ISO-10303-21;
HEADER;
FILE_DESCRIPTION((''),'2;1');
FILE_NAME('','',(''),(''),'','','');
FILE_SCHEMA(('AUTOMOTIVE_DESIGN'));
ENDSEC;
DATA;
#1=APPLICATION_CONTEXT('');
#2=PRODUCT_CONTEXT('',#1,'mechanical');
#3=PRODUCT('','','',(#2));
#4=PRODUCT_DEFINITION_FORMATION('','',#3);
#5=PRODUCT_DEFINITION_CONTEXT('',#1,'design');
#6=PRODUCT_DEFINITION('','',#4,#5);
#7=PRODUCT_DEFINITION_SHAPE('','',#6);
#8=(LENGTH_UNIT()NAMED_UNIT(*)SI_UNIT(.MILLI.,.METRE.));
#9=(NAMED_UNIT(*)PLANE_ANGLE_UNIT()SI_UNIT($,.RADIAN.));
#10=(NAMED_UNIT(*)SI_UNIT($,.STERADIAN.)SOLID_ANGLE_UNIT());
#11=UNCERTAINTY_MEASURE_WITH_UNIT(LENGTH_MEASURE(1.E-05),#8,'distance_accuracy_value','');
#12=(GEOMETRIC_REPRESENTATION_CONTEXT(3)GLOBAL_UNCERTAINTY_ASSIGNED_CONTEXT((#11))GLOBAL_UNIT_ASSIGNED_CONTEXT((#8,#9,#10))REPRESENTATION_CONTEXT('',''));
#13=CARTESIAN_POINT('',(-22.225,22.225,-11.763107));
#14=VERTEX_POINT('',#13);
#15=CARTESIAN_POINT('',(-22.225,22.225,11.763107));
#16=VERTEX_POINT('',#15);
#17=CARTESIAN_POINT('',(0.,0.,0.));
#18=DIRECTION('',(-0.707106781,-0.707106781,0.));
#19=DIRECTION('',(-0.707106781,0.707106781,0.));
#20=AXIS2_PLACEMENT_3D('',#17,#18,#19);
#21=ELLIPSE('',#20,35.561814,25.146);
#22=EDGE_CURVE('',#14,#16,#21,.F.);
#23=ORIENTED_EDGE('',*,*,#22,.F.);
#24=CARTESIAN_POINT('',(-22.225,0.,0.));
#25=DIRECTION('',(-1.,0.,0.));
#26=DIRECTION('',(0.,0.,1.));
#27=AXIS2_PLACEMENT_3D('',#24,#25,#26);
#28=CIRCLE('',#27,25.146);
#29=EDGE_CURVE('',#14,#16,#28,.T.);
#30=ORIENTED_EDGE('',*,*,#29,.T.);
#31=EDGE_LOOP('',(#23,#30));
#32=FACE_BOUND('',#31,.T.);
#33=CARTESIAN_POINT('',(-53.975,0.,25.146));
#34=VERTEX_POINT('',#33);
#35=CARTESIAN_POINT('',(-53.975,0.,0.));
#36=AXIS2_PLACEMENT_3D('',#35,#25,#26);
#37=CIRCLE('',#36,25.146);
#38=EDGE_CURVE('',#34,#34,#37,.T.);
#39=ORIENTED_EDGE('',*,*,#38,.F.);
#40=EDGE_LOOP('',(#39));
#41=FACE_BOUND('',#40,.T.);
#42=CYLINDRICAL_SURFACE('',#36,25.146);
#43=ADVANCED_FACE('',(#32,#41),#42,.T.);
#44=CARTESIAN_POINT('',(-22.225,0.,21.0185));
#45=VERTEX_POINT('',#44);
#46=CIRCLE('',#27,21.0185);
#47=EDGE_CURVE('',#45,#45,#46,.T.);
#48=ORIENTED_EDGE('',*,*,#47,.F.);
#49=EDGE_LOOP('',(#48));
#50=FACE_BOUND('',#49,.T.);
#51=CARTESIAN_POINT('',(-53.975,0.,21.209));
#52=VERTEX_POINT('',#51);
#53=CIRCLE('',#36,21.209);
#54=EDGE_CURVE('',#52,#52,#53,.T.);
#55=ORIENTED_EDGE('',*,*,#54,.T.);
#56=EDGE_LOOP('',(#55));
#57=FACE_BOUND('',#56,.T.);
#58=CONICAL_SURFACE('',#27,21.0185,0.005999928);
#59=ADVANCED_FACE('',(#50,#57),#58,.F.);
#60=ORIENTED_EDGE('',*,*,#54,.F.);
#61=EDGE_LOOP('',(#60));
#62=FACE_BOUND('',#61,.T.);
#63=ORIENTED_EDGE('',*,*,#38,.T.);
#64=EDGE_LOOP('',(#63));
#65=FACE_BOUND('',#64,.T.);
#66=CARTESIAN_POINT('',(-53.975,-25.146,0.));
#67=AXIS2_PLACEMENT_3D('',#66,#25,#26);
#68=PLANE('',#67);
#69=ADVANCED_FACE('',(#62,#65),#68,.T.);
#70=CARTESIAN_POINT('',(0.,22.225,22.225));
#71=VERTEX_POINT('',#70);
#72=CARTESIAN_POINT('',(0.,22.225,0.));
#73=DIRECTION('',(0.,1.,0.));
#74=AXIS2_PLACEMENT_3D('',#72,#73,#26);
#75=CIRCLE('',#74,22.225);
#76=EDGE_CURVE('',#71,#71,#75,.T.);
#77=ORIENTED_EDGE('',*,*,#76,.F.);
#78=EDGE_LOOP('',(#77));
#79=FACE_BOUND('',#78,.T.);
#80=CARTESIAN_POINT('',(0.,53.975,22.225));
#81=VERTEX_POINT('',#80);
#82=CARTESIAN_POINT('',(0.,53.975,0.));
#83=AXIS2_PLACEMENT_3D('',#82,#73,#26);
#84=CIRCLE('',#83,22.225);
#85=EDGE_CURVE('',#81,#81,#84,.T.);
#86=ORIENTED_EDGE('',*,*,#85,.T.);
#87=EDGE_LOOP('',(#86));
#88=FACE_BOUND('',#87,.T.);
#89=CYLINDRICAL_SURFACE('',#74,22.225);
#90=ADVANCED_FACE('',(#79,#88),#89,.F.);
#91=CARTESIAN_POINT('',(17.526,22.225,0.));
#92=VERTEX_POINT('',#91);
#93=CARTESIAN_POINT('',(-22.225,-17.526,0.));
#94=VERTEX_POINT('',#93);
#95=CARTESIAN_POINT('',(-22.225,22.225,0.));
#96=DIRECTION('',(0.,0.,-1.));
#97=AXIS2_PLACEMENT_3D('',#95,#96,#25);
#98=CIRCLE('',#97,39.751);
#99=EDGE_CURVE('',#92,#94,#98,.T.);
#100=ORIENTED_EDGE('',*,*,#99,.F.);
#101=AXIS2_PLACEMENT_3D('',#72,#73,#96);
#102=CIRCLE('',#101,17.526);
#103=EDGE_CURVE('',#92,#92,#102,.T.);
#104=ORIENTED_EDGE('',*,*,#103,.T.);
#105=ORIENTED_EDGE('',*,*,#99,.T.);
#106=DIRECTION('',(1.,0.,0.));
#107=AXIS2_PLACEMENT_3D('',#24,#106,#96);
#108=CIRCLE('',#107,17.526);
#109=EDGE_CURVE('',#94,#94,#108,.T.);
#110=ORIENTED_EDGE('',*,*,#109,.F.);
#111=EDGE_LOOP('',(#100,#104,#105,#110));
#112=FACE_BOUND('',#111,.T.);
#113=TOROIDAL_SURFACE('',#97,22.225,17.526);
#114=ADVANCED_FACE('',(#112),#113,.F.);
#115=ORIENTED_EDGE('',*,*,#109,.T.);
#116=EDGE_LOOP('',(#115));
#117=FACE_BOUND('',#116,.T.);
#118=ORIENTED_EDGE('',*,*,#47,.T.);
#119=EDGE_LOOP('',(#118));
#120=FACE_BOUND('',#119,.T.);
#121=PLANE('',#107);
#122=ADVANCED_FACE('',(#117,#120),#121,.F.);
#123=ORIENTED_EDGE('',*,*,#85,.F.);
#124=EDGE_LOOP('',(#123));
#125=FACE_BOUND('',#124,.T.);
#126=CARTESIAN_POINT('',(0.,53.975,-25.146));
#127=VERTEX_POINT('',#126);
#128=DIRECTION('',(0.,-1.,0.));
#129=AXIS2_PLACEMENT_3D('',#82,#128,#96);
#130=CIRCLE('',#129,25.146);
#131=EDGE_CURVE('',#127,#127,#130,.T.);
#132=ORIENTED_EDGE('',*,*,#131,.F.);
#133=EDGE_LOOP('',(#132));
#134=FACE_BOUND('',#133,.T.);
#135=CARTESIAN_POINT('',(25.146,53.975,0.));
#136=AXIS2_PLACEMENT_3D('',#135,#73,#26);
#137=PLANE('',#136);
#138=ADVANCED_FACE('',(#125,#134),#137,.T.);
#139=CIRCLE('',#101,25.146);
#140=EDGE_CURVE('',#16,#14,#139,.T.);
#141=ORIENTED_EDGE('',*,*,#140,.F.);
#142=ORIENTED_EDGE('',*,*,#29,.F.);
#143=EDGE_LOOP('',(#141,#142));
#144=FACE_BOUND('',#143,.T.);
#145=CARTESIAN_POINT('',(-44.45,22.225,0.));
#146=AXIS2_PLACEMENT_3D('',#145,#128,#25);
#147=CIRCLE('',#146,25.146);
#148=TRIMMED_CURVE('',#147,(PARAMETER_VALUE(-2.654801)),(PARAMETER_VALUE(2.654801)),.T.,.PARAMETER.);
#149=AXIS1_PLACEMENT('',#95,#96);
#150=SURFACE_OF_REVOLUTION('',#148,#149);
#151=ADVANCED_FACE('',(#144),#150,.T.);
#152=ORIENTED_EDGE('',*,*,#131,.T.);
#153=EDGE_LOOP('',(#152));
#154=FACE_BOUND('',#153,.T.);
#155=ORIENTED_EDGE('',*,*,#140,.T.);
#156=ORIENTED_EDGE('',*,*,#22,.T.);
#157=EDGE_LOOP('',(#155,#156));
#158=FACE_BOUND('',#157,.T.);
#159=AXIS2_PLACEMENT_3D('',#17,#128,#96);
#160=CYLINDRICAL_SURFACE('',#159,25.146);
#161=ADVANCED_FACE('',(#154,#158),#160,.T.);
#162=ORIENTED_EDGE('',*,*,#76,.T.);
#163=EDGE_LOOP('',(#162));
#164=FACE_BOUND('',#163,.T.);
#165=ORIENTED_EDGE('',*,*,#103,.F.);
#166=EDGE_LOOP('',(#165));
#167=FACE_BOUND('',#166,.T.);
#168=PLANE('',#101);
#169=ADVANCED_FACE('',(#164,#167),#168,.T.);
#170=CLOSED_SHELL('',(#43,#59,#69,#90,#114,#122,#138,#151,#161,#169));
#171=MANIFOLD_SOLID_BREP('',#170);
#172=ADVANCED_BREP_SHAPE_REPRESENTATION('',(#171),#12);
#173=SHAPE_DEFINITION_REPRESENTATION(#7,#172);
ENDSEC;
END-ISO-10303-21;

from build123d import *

# Parameters (mm, degrees)
SKETCH3_R          = 25.146
SKETCH3_R_2        = 17.526
SKETCH5_R          = 22.225
CUT_EXTRUDE1_DEPTH = 31.75


with BuildPart() as part:
    # Sketch1 → Revolve1 (revolve)
    with BuildSketch(Plane.XY):
        Polygon((-53.975, -25.146), (-22.225, -25.146), (-22.225, -21.0185), (-53.975, -21.209), align=None)
    revolve(axis=Axis((-53.975, 0, 0), (1, 0, 0)))


with BuildPart() as body_2:
    # Sketch2 → Revolve2 (revolve)
    with BuildSketch(Plane.XY):
        Polygon((21.209, 53.975), (21.0185, 22.225), (25.146, 22.225), (25.146, 53.975), align=None)
    revolve(axis=Axis((0, 0, 0), (0, 1, 0)))


with BuildPart() as sweep1_tool:
    # Sweep1: sweep along a path in Sketch4
    with BuildLine(Plane.XY) as sweep1_path:
        ThreePointArc((-22.225, 0), (-6.509552, 6.509552), (0, 22.225))
    # Sketch3 → Sweep1 (sweep)
    with BuildSketch(Plane(origin=(-22.225, 0, 0), x_dir=(0, 0, -1), z_dir=(1, 0, 0))):
        Circle(SKETCH3_R)
        Circle(SKETCH3_R_2, mode=Mode.SUBTRACT)
    sweep(path=sweep1_path.line)


with BuildPart() as part_1:
    add(part.part)


with BuildPart() as part_2:
    # Sweep1: joined with sweep1_tool
    add(part_1.part.fuse(sweep1_tool.part, body_2.part, tol=0.00001))

    # Sketch5 → Cut-Extrude1 (cut)
    with BuildSketch(Plane(origin=(0, 53.975, 0), x_dir=(1, 0, 0), z_dir=(0, 1, 0))):
        Circle(SKETCH5_R)
    extrude(amount=-CUT_EXTRUDE1_DEPTH, mode=Mode.SUBTRACT)


solid = part_2.part
